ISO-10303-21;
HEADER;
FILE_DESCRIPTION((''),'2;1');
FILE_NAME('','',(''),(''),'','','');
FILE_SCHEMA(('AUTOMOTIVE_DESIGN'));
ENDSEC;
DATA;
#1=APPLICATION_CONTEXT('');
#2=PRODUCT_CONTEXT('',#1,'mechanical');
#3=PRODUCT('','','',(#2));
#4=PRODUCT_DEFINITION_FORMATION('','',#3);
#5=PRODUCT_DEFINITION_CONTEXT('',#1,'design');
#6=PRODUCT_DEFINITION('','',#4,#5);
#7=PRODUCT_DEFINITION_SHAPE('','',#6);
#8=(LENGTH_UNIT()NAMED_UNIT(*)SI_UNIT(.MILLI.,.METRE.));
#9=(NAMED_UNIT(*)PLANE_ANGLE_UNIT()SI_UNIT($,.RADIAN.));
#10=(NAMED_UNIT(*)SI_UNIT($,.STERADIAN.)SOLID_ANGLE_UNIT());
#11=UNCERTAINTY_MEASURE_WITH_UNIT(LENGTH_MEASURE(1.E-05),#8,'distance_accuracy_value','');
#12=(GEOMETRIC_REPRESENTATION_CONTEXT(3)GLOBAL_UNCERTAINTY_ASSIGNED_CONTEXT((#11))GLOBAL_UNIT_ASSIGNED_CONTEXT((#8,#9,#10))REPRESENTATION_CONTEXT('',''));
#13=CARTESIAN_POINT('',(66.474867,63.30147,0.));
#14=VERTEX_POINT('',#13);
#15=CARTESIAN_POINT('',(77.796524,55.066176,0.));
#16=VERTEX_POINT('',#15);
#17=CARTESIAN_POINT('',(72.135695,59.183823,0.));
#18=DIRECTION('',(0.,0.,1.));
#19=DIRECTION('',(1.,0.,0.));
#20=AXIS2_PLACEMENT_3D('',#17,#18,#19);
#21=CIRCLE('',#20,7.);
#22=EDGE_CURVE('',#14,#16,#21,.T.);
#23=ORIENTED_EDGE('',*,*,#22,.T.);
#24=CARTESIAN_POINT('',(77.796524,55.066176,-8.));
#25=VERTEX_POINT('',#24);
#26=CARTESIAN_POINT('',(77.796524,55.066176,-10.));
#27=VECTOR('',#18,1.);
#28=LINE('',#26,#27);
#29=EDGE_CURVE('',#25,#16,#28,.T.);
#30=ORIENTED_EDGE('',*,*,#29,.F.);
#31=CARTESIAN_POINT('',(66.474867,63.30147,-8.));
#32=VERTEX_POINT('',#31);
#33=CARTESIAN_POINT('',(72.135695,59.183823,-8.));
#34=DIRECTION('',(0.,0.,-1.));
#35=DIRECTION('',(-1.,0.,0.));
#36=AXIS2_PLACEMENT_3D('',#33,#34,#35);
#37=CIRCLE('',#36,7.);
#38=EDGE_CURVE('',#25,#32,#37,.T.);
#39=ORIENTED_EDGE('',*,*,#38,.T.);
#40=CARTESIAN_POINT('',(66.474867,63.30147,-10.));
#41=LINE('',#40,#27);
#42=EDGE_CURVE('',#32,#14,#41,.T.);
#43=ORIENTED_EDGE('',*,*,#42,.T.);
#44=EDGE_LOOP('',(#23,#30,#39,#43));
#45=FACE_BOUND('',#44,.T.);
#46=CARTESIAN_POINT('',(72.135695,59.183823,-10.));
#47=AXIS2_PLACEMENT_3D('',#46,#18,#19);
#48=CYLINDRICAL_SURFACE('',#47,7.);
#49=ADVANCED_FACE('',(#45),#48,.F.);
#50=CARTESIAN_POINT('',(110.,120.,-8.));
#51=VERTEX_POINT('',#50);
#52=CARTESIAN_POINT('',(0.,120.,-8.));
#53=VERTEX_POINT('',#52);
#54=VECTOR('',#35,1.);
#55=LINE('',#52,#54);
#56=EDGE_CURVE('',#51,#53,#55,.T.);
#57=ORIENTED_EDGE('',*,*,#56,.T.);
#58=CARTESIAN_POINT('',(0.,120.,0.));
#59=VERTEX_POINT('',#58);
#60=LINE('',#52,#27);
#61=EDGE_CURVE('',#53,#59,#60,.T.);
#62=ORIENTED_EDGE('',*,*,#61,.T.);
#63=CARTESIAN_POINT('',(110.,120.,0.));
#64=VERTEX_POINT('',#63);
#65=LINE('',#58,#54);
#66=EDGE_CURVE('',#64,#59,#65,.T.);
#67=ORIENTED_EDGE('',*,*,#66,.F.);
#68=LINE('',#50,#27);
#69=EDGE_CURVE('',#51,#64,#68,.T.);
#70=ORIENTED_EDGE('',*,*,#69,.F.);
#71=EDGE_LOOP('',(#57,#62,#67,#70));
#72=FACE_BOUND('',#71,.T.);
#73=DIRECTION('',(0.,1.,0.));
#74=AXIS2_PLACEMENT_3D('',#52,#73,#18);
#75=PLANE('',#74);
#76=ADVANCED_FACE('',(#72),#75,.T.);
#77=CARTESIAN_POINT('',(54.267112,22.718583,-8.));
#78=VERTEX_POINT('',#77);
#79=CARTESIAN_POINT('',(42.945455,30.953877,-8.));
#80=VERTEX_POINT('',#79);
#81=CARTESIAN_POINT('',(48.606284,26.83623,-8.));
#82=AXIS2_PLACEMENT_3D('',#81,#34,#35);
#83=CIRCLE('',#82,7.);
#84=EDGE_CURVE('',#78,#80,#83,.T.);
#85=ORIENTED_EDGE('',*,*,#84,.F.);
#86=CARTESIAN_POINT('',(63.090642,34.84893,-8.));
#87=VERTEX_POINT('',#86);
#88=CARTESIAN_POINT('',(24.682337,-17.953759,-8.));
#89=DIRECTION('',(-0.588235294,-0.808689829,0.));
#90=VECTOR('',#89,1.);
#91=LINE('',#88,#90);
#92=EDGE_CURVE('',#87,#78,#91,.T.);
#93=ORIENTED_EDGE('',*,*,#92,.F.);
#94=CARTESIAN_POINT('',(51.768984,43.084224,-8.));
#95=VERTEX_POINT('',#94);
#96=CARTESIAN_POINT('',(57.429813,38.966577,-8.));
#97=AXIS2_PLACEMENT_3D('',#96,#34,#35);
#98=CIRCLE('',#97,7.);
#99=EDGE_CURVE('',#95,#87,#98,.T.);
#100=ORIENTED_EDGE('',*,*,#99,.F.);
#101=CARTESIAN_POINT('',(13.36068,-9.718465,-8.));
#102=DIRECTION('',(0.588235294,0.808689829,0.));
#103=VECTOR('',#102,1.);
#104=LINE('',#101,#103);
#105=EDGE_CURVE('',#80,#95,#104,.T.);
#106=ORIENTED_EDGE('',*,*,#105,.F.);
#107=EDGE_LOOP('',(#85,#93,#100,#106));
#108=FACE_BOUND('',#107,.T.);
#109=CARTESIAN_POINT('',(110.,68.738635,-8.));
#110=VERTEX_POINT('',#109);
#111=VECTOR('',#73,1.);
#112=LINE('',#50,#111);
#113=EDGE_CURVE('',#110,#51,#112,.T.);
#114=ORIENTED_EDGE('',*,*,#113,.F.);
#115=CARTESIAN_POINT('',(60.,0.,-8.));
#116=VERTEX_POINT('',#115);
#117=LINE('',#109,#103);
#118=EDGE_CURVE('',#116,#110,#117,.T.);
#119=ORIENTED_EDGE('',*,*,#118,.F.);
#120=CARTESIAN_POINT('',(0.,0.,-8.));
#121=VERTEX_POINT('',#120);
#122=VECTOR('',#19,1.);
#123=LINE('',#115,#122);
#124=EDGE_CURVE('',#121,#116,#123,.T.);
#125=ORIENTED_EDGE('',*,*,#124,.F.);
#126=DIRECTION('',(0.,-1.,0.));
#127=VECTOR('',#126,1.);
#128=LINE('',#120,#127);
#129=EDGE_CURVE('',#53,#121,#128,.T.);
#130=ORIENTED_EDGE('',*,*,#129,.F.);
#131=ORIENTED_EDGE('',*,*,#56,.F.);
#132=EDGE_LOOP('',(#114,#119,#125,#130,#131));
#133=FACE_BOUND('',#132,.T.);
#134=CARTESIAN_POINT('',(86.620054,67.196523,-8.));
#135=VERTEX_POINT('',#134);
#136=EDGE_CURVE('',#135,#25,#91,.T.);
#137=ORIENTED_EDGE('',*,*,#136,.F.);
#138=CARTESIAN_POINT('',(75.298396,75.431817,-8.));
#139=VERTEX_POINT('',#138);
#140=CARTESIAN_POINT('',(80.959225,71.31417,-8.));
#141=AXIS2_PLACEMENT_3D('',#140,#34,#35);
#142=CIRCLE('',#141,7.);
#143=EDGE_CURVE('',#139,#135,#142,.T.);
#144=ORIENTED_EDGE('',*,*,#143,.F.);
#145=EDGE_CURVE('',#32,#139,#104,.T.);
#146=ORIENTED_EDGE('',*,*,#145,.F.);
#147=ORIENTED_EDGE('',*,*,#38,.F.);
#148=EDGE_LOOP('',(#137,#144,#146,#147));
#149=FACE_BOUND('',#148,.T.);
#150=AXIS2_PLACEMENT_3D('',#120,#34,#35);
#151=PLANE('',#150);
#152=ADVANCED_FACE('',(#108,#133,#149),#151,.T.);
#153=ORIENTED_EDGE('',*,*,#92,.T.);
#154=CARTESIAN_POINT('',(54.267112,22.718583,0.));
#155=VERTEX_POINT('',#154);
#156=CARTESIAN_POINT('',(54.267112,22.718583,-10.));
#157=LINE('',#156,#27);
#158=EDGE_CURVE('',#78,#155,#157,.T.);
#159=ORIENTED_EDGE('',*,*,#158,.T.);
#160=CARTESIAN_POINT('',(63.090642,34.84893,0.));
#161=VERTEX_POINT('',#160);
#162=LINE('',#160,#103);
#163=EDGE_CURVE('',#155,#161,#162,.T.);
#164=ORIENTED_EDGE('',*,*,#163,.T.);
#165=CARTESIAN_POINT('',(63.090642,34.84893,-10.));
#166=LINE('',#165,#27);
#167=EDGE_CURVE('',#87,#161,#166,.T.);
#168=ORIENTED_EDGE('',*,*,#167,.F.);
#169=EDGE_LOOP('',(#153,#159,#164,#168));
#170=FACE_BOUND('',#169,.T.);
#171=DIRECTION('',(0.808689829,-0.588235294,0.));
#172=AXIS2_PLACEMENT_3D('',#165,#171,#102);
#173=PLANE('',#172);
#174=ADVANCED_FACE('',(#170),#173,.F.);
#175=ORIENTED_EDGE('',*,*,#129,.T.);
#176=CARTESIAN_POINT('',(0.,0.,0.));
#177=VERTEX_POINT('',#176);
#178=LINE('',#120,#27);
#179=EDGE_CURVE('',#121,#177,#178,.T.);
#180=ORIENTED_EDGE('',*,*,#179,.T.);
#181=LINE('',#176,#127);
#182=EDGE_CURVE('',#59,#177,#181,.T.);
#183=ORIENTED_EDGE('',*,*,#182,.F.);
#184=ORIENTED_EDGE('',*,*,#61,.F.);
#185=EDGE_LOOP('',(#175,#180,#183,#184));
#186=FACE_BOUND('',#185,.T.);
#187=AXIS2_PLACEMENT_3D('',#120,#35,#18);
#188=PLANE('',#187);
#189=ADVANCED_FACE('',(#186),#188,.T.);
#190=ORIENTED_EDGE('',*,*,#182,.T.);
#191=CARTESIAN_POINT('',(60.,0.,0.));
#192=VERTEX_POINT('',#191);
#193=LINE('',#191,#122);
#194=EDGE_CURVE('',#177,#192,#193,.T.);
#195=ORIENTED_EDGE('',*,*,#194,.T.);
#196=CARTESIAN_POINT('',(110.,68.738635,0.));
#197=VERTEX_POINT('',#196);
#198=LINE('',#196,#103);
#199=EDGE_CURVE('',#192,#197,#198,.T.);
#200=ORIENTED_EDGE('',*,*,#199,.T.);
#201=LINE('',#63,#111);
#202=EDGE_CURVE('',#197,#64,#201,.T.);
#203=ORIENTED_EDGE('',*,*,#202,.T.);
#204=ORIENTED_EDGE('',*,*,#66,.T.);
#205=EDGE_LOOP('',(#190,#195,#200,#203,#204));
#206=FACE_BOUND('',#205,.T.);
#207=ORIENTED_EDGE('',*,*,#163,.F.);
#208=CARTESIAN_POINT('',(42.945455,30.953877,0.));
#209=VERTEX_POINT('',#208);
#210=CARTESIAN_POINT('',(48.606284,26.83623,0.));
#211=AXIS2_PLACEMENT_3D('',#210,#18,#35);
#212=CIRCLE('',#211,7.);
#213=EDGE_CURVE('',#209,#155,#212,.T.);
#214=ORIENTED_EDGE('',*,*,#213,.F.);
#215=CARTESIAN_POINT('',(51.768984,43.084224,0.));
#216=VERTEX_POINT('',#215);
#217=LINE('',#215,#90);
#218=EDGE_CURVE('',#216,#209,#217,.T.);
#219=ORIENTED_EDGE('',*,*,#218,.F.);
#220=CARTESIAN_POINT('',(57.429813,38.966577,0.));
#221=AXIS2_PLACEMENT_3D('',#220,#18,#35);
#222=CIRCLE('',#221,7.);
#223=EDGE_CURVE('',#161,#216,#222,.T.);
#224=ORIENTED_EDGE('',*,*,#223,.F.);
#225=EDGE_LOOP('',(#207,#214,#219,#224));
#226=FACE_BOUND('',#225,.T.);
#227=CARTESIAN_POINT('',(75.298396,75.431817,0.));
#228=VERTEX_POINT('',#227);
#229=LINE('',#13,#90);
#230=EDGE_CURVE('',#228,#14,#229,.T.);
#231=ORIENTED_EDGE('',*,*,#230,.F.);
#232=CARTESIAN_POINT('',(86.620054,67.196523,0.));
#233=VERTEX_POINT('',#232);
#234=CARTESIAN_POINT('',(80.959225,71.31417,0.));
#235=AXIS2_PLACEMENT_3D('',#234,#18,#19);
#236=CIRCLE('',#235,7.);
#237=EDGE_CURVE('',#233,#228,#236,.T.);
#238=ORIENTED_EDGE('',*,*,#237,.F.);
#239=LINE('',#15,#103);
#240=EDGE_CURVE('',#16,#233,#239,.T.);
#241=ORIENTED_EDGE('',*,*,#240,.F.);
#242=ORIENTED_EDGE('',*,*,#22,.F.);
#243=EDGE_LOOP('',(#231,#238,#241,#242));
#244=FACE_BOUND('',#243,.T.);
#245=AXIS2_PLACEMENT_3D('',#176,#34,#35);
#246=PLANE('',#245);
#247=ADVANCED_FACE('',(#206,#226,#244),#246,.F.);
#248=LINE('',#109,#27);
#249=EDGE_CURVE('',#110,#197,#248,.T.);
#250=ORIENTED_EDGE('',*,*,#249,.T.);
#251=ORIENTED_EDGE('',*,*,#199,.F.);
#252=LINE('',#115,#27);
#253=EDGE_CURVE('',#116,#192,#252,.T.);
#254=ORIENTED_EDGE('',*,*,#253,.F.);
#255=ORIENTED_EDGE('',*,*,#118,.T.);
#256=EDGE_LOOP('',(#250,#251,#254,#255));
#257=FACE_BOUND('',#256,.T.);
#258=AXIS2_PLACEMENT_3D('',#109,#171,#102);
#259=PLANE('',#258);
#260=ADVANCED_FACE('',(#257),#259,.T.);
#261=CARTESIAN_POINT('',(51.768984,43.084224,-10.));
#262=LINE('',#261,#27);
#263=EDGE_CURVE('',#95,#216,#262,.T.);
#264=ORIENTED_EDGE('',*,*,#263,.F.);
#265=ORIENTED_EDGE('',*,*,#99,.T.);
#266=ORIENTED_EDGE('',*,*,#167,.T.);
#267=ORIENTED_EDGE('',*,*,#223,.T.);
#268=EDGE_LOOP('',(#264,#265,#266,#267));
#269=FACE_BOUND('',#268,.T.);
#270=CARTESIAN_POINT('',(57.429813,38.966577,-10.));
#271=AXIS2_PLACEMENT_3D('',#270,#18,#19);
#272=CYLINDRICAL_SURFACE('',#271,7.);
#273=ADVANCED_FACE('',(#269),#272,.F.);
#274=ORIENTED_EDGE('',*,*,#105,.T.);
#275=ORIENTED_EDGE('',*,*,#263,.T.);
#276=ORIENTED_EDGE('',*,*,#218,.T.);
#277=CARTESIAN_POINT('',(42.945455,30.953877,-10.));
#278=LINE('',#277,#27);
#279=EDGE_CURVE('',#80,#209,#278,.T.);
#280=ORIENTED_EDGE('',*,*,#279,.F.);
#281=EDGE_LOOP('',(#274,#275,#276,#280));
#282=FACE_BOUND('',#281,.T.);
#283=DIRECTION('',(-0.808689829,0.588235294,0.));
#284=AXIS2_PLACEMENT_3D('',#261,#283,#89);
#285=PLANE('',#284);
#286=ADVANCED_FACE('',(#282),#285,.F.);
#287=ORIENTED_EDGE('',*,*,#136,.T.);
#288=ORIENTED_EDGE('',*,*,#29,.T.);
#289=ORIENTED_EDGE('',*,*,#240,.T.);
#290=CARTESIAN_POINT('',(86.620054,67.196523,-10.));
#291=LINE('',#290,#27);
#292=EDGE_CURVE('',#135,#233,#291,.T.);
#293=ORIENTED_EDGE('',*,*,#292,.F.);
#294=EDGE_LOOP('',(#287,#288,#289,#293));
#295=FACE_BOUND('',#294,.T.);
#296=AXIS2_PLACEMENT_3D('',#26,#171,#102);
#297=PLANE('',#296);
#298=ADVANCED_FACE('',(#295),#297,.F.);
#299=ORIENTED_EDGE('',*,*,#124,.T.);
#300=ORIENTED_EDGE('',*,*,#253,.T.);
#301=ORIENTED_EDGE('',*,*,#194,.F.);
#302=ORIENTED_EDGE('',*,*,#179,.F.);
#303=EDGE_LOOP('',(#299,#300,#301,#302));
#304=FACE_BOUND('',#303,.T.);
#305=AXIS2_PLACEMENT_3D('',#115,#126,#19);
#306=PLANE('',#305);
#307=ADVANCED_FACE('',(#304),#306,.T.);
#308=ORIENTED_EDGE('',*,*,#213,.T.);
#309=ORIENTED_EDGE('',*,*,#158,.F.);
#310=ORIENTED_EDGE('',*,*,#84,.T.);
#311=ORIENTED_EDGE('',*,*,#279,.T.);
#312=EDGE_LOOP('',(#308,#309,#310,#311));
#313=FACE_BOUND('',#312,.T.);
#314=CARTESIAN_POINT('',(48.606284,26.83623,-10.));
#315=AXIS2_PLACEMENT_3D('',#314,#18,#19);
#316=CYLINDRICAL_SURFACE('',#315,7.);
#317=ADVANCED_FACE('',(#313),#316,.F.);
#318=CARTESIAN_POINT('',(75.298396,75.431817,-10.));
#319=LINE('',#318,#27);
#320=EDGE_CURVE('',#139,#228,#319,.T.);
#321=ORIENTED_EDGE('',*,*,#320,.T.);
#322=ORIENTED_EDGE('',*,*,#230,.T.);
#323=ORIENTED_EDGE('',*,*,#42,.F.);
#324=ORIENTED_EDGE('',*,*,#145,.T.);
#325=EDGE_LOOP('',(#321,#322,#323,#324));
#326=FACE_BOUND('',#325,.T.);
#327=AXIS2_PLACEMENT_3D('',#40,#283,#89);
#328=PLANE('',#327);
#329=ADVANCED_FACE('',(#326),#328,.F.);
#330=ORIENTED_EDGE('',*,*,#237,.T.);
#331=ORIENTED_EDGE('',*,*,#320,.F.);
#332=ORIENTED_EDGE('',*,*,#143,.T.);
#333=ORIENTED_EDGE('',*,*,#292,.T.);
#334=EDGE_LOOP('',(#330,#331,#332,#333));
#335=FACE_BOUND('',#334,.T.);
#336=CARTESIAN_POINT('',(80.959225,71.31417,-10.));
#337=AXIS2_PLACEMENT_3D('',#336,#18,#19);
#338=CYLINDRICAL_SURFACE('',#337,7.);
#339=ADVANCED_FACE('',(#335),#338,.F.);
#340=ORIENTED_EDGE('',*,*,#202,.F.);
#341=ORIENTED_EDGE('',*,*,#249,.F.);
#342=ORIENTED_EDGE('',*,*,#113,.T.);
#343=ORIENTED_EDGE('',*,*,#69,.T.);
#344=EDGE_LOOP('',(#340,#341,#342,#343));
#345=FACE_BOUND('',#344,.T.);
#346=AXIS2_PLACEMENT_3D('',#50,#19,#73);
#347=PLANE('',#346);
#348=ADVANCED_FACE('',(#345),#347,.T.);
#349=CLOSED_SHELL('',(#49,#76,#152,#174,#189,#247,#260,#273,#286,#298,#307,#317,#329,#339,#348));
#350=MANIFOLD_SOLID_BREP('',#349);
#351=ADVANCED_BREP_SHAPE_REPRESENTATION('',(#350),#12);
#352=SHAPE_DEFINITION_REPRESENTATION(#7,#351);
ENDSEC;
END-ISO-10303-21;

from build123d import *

# Parameters (mm, degrees)
SM_BASE_FLANGE_1_DEPTH = 8
CUT_EXTRUDE_1_DEPTH    = 10


# Sheet-metal steps are written as plain solids
with BuildPart() as part:
    # Sketch 1 → Базовая кромка1 (new body)
    with BuildSketch(Plane.XY):
        Polygon((0, 0), (0, 120), (110, 120), (110, 68.738635424), (60, 0), align=None)
    extrude(amount=-SM_BASE_FLANGE_1_DEPTH)

    # Эскиз6 → Вырез-Вытянуть1 (cut)
    with BuildSketch(Plane.XY):
        with BuildLine():
            Line((66.474866664, 63.30146998), (75.298396076, 75.431817408))
            ThreePointArc((75.298396076, 75.431817408), (85.076871934, 76.974999149), (86.620053675, 67.196523291))
            Line((86.620053675, 67.196523291), (77.796524263, 55.066175863))
            ThreePointArc((77.796524263, 55.066175863), (68.018048405, 53.522994122), (66.474866664, 63.30146998))
        make_face()
        with BuildLine():
            Line((51.768984311, 43.084224267), (42.945454899, 30.95387684))
            ThreePointArc((42.945454899, 30.95387684), (44.48863664, 21.175400981), (54.267112498, 22.718582722))
            Line((54.267112498, 22.718582722), (63.09064191, 34.84893015))
            ThreePointArc((63.09064191, 34.84893015), (61.547460169, 44.627406008), (51.768984311, 43.084224267))
        make_face()
    extrude(amount=-CUT_EXTRUDE_1_DEPTH, mode=Mode.SUBTRACT)


solid = part.part
